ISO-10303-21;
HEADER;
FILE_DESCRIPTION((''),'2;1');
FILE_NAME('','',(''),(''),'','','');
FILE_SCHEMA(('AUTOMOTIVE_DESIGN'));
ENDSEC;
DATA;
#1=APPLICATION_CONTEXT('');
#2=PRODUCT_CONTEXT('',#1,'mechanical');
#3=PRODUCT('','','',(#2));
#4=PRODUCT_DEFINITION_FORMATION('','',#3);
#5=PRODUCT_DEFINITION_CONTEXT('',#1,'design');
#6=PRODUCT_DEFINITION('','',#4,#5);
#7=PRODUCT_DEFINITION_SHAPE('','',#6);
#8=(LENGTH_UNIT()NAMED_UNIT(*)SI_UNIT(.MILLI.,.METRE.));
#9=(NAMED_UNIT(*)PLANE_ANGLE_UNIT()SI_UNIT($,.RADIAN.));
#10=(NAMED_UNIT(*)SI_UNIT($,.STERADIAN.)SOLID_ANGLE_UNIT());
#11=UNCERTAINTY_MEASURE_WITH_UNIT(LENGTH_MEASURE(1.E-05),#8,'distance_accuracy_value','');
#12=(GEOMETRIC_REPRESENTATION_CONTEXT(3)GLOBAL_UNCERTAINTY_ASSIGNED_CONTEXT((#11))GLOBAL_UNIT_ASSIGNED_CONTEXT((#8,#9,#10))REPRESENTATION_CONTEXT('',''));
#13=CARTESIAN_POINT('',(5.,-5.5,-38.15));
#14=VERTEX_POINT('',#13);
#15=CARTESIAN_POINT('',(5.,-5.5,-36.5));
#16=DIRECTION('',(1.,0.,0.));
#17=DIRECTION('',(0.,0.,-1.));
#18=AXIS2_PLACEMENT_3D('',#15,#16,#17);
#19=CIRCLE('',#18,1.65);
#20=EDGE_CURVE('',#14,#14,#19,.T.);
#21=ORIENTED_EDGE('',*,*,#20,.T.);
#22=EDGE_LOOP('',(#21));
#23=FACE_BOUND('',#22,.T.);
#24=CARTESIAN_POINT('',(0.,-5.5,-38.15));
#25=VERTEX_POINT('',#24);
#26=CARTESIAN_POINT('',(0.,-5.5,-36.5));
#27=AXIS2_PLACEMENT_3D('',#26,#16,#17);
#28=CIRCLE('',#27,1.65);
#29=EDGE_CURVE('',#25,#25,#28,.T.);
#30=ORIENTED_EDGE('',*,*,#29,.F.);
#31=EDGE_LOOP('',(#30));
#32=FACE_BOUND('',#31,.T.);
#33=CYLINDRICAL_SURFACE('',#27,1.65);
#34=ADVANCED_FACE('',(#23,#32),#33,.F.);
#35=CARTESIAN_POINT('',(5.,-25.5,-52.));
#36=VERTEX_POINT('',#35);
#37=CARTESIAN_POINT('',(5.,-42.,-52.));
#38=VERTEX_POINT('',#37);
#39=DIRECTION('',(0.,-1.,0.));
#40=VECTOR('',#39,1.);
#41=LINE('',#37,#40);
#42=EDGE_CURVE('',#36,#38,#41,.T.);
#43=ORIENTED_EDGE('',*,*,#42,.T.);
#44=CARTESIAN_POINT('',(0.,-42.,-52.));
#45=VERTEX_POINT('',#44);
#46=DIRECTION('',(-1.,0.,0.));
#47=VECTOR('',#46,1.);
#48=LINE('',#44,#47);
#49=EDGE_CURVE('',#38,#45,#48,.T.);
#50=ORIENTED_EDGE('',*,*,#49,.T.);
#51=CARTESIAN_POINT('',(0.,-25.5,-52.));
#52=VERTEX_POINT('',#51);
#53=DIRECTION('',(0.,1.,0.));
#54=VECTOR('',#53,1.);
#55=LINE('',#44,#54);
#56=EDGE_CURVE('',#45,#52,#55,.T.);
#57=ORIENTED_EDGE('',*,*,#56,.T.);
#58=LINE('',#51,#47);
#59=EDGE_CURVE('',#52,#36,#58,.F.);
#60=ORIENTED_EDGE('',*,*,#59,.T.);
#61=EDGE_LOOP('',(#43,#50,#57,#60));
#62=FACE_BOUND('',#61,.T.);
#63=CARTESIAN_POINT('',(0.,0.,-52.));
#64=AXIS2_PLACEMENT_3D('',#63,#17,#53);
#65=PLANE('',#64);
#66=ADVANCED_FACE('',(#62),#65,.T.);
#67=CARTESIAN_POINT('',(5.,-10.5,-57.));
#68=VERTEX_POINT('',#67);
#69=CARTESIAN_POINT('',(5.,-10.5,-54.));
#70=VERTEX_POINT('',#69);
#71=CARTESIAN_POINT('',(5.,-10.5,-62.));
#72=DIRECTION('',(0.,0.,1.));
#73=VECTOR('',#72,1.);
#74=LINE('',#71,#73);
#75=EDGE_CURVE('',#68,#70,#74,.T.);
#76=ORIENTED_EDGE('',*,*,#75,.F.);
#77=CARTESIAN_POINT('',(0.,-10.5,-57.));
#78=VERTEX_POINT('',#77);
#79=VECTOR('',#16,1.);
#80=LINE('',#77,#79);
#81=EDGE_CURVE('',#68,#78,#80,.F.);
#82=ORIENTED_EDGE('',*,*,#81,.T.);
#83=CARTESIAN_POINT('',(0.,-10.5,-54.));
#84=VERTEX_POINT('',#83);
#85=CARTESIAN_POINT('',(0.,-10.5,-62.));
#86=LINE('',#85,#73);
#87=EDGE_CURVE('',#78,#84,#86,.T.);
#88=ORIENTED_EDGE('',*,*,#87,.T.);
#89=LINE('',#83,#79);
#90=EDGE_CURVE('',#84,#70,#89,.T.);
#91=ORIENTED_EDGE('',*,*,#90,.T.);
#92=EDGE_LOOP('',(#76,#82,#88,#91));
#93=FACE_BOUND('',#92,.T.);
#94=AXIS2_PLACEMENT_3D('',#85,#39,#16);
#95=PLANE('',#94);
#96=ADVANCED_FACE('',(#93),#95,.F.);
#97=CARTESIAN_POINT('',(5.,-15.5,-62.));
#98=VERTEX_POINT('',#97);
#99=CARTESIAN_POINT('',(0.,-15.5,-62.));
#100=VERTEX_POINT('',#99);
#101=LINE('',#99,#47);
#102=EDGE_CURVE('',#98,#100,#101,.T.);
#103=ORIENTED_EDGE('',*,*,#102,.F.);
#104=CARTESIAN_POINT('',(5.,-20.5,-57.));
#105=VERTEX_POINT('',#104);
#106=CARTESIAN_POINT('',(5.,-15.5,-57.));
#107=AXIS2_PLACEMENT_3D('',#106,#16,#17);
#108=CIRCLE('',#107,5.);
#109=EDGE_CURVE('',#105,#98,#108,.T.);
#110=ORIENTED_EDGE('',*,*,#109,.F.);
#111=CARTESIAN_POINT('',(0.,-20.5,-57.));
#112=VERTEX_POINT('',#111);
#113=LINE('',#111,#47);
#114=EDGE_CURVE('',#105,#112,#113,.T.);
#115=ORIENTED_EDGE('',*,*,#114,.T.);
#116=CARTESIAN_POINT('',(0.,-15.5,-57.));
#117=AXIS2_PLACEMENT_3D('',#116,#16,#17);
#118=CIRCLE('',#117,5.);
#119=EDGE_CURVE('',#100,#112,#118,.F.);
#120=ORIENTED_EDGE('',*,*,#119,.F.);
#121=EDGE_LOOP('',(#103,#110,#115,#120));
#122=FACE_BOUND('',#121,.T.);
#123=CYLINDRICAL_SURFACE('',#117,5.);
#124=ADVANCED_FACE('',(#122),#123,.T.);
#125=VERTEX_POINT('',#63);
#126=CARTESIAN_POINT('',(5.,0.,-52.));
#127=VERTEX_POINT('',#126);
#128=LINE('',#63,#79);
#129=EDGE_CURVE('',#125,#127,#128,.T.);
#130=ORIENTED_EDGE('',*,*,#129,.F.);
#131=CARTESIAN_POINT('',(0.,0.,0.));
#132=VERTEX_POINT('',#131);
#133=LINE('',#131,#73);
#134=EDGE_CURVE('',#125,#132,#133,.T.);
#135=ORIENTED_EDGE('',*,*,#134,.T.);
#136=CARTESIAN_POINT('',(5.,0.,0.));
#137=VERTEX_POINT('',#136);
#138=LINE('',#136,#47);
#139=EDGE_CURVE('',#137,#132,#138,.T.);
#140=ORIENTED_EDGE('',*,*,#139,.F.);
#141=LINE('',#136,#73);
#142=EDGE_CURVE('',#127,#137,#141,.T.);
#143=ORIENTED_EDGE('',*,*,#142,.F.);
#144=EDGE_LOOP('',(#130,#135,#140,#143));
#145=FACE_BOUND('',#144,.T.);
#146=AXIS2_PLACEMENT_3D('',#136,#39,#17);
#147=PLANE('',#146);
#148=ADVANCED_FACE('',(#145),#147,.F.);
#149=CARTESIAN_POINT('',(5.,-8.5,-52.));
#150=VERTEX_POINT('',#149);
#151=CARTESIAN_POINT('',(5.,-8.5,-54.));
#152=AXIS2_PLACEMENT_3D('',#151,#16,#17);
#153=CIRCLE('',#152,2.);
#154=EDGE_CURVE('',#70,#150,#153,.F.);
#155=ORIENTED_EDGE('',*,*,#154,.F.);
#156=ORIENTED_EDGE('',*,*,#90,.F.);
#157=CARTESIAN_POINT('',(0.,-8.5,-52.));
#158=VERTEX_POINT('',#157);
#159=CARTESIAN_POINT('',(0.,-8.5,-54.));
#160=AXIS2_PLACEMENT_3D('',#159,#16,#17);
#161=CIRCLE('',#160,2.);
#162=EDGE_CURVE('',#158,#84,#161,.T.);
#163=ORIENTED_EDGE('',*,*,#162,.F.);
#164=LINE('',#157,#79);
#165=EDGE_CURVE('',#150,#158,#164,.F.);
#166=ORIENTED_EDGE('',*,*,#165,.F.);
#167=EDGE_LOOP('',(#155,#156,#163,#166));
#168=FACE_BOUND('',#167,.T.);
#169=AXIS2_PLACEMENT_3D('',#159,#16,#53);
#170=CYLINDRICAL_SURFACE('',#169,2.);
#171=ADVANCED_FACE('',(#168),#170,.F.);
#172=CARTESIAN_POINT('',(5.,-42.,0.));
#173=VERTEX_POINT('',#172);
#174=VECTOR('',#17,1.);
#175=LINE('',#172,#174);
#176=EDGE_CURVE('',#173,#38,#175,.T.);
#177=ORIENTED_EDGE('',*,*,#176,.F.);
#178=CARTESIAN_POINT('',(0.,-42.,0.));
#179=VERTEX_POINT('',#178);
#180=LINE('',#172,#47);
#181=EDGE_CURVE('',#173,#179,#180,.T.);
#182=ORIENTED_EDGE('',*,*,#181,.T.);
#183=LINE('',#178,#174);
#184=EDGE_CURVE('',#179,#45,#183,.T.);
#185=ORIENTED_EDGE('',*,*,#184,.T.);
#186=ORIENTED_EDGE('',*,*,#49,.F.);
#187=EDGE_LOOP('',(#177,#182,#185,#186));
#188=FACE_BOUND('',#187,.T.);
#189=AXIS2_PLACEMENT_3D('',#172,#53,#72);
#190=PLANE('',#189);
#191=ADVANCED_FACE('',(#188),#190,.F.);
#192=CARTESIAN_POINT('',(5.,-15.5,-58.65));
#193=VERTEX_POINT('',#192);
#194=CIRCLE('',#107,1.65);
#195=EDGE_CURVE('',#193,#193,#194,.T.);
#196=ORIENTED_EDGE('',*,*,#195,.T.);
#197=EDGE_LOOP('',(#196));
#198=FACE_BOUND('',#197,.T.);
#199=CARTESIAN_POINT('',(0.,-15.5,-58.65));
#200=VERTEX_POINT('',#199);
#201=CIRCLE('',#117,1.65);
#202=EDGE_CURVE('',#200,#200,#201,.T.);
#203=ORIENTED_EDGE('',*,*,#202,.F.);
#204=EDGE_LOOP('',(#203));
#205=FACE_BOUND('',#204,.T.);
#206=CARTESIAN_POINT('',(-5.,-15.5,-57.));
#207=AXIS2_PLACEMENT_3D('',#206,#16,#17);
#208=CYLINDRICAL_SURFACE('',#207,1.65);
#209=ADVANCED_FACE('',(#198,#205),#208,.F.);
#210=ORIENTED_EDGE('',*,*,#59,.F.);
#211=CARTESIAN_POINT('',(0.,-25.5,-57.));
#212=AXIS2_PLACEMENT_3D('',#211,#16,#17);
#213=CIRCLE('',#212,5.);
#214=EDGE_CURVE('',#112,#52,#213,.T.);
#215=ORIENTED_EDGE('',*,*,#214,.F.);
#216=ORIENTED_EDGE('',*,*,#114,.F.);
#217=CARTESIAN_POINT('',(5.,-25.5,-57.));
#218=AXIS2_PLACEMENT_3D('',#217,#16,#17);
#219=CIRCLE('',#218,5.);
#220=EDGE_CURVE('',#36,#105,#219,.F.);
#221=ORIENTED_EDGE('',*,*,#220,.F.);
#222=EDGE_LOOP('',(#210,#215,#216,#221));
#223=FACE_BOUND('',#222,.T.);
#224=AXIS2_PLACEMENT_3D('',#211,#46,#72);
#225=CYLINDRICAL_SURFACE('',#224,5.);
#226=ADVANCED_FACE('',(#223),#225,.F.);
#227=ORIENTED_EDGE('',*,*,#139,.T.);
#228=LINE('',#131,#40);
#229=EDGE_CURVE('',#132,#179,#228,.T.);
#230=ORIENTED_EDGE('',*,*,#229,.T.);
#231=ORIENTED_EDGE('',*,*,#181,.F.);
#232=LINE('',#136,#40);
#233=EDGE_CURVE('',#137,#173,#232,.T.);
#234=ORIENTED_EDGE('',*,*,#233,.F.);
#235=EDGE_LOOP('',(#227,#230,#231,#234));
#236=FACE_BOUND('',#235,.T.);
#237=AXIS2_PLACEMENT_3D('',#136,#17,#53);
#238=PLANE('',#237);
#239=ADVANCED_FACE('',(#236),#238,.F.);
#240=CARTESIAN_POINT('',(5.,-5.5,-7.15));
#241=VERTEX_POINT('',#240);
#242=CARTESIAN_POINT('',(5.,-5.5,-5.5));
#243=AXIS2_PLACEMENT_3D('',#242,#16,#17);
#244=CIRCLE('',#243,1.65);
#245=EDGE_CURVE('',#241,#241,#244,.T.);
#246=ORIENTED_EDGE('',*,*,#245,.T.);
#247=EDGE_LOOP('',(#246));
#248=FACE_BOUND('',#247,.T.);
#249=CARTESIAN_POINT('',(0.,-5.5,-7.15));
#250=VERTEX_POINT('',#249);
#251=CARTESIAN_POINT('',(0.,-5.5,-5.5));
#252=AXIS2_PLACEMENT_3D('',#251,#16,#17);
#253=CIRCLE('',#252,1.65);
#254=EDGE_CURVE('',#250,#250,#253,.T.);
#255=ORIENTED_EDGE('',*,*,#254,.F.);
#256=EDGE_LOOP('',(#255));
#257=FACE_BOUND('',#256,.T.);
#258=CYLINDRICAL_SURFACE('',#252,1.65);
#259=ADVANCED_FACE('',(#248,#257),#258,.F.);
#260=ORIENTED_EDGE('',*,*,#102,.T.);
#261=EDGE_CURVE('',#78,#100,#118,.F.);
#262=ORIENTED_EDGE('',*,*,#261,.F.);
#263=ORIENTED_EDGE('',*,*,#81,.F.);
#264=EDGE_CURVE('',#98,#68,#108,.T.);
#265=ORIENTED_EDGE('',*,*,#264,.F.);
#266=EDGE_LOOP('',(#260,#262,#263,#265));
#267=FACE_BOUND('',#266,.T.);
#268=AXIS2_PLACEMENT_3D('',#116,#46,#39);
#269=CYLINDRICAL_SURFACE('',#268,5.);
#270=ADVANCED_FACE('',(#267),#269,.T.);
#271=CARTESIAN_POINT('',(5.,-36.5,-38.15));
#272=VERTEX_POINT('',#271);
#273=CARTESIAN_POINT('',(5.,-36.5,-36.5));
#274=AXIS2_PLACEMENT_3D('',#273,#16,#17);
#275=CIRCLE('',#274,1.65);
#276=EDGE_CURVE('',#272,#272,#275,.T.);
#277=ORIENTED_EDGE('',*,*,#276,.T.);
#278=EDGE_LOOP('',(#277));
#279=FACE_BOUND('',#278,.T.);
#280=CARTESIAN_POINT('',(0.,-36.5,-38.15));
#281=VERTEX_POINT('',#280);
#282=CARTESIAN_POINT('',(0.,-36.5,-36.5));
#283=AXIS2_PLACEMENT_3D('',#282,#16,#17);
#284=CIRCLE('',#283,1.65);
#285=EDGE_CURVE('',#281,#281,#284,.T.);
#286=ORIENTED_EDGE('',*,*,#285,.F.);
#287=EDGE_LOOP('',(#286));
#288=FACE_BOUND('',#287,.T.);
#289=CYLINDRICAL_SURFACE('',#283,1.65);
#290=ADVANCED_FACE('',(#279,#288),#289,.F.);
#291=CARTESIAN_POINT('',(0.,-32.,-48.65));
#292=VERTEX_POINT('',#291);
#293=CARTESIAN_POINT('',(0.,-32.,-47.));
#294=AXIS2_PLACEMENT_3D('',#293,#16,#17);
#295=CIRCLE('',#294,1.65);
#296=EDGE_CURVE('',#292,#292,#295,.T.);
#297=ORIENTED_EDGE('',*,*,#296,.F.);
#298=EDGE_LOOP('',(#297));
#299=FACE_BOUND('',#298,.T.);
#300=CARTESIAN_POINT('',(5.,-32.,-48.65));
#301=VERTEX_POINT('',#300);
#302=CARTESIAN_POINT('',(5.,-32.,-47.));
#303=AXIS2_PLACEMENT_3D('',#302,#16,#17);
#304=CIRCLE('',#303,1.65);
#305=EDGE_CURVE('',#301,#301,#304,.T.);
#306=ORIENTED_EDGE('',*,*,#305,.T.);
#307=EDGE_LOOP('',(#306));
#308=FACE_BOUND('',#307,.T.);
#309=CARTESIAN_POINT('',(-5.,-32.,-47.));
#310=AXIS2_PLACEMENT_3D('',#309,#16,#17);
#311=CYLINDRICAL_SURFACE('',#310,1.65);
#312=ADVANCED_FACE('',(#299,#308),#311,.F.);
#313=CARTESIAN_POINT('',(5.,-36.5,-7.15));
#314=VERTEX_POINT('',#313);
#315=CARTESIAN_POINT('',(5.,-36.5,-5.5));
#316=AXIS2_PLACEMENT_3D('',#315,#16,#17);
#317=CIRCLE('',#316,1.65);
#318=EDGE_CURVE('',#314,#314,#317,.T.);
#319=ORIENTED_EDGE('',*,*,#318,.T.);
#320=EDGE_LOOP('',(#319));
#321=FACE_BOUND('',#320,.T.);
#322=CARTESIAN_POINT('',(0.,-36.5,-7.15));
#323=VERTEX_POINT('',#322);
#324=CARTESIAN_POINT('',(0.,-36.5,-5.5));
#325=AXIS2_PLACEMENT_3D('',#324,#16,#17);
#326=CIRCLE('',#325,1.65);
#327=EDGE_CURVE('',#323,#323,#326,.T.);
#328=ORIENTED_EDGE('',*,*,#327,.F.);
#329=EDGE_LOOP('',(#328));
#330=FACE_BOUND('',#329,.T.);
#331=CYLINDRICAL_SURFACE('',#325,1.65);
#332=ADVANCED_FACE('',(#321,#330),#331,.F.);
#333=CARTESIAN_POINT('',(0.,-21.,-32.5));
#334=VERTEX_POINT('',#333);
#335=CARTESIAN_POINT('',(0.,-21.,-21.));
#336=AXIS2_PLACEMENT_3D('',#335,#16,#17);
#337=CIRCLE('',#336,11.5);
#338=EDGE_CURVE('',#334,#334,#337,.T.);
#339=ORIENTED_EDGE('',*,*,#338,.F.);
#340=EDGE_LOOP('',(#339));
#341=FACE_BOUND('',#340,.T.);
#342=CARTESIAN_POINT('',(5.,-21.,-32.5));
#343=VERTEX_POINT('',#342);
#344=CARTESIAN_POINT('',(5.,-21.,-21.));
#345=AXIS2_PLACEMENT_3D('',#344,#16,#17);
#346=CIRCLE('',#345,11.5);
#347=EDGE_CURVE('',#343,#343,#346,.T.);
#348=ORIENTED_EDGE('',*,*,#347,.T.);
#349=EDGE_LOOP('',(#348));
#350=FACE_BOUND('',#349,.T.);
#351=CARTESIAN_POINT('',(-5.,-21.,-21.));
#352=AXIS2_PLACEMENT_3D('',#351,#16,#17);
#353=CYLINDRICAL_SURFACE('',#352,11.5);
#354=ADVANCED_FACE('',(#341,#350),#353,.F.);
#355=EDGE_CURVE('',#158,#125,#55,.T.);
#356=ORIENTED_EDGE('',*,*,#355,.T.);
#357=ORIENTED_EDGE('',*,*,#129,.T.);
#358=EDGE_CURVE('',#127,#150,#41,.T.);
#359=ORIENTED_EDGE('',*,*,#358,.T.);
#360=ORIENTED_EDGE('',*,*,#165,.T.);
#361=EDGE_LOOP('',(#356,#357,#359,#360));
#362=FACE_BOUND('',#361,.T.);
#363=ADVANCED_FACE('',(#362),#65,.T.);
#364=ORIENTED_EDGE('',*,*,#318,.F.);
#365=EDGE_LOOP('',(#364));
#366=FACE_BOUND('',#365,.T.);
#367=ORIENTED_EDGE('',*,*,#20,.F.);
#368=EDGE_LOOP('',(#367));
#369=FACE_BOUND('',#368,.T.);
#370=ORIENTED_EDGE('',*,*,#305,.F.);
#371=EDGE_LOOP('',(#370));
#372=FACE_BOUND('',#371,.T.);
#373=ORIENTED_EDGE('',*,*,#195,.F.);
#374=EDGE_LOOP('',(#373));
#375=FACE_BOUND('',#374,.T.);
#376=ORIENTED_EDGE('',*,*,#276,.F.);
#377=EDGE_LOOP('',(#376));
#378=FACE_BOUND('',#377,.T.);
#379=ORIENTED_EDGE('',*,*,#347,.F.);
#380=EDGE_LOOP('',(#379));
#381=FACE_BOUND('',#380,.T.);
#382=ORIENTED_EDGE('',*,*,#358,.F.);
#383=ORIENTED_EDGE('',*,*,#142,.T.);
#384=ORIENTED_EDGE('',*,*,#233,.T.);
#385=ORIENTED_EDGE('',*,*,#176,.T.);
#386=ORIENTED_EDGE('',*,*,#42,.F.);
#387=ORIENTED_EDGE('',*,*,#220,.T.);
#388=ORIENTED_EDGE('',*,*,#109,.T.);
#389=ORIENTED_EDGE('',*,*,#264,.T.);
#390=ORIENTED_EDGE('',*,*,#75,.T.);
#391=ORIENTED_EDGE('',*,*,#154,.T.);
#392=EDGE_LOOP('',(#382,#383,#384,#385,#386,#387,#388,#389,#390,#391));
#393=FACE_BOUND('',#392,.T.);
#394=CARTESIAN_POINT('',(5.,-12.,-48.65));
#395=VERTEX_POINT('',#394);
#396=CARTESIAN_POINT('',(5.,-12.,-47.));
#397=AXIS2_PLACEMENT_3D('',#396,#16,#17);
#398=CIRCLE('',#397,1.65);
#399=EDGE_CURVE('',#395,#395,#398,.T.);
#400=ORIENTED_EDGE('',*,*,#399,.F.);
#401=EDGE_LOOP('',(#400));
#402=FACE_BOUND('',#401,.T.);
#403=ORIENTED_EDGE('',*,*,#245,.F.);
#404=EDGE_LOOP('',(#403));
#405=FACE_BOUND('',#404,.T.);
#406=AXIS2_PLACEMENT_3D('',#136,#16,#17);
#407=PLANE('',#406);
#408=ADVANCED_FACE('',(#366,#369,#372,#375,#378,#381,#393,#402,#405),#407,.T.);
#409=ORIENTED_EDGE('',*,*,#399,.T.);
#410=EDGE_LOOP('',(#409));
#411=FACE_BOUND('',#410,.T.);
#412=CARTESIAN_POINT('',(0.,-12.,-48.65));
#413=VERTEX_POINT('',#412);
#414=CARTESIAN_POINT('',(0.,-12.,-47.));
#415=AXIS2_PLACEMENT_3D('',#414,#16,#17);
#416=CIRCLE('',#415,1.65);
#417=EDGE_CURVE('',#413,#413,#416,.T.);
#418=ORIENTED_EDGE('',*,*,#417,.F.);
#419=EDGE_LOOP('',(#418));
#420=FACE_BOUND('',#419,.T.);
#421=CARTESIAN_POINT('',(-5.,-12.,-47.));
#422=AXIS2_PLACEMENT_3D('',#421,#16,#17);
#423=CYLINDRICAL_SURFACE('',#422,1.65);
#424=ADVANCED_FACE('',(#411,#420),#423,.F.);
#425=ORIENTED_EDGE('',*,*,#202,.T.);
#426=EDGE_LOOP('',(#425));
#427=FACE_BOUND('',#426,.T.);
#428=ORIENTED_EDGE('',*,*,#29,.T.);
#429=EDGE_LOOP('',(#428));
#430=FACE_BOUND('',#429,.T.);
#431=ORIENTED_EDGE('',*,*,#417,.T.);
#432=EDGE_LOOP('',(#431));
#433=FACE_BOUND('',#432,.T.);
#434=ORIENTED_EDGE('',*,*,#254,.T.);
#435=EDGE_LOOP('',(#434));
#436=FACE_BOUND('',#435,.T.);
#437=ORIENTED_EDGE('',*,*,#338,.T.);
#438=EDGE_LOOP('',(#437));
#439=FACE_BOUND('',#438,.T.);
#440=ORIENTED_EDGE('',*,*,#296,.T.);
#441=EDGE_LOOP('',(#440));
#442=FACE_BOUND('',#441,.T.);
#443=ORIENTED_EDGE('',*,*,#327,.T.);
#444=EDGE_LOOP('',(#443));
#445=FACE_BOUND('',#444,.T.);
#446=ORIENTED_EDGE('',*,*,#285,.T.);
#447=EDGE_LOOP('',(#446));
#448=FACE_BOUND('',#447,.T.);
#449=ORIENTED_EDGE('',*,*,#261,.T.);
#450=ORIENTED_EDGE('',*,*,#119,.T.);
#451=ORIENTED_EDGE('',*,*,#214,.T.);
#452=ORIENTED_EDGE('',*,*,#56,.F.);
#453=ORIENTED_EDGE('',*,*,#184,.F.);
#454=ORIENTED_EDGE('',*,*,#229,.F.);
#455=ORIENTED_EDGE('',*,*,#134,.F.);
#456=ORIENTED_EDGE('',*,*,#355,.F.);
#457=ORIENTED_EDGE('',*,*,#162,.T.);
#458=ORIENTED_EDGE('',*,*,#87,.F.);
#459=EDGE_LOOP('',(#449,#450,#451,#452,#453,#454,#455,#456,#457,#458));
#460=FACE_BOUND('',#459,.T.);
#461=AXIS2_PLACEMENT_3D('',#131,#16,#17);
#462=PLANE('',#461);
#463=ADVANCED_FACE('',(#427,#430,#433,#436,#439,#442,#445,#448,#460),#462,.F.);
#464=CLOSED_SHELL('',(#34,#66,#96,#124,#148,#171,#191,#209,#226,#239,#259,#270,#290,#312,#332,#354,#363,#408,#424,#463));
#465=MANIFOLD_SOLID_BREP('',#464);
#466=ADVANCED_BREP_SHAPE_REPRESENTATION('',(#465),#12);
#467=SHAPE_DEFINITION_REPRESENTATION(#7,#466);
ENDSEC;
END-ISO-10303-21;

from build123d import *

# Parameters (mm, degrees)
SKETCH1_W           = 42
SKETCH1_H           = 42
BOSS_EXTRUDE1_DEPTH = 5
SKETCH2_R           = 1.65
CUT_EXTRUDE1_DEPTH  = 5
SKETCH3_W           = 5
SKETCH3_H           = 42
BOSS_EXTRUDE2_DEPTH = 10
SKETCH4_W           = 5
SKETCH4_H           = 10
BOSS_EXTRUDE3_DEPTH = 10
SKETCH5_R           = 1.65
CUT_EXTRUDE2_DEPTH  = 10
FILLET1_R           = 5
FILLET2_R           = 2
SKETCH6_R           = 11.5
CUT_EXTRUDE3_DEPTH  = 10


with BuildPart() as part:
    # Sketch1 → Boss-Extrude1 (new body)
    with BuildSketch(Plane(origin=(0, 0, 0), x_dir=(0, 0, -1), z_dir=(1, 0, 0))):
        with Locations((21, -21)):
            Rectangle(SKETCH1_W, SKETCH1_H)
    extrude(amount=BOSS_EXTRUDE1_DEPTH)

    # Sketch2 → Cut-Extrude1 (cut)
    with BuildSketch(Plane(origin=(5, 0, 0), x_dir=(0, 0, -1), z_dir=(1, 0, 0))):
        with Locations((5.5, -5.5)):
            Circle(SKETCH2_R)
        with Locations((36.5, -5.5)):
            Circle(SKETCH2_R)
        with Locations((36.5, -36.5)):
            Circle(SKETCH2_R)
        with Locations((5.5, -36.5)):
            Circle(SKETCH2_R)
    extrude(amount=-CUT_EXTRUDE1_DEPTH, mode=Mode.SUBTRACT)

    # Sketch3 → Boss-Extrude2 (add)
    with BuildSketch(Plane(origin=(0, 0, -42), x_dir=(-1, 0, 0), z_dir=(0, 0, -1))):
        with Locations((-2.5, -21)):
            Rectangle(SKETCH3_W, SKETCH3_H)
    extrude(amount=BOSS_EXTRUDE2_DEPTH)

    # Sketch4 → Boss-Extrude3 (add)
    with BuildSketch(Plane(origin=(0, 0, -52), x_dir=(-1, 0, 0), z_dir=(0, 0, -1))):
        with Locations((-2.5, -15.5)):
            Rectangle(SKETCH4_W, SKETCH4_H)
    extrude(amount=BOSS_EXTRUDE3_DEPTH)

    # Sketch5 → Cut-Extrude2 (cut)
    with BuildSketch(Plane(origin=(5, 0, 0), x_dir=(0, 0, -1), z_dir=(1, 0, 0))):
        with Locations((57, -15.5)):
            Circle(SKETCH5_R)
        with Locations((47, -32)):
            Circle(SKETCH5_R)
        with Locations((47, -12)):
            Circle(SKETCH5_R)
    extrude(amount=-CUT_EXTRUDE2_DEPTH, mode=Mode.SUBTRACT)

    # Fillet1
    fillet1_edges = [part.edges().sort_by_distance(p)[0] for p in [
        (2.5, -10.5, -62),
        (2.5, -20.5, -62),
        (2.5, -20.5, -52),
    ]]
    fillet(fillet1_edges, radius=FILLET1_R - 0.0001)  # a hair under: the kernel refuses the full size

    # Fillet2
    fillet2_edges = [part.edges().sort_by_distance(p)[0] for p in [
        (2.5, -10.5, -52),
    ]]
    fillet(fillet2_edges, radius=FILLET2_R)

    # Sketch6 → Cut-Extrude3 (cut)
    with BuildSketch(Plane(origin=(5, 0, 0), x_dir=(0, 0, -1), z_dir=(1, 0, 0))):
        with Locations((21, -21)):
            Circle(SKETCH6_R)
    extrude(amount=-CUT_EXTRUDE3_DEPTH, mode=Mode.SUBTRACT)


solid = part.part
